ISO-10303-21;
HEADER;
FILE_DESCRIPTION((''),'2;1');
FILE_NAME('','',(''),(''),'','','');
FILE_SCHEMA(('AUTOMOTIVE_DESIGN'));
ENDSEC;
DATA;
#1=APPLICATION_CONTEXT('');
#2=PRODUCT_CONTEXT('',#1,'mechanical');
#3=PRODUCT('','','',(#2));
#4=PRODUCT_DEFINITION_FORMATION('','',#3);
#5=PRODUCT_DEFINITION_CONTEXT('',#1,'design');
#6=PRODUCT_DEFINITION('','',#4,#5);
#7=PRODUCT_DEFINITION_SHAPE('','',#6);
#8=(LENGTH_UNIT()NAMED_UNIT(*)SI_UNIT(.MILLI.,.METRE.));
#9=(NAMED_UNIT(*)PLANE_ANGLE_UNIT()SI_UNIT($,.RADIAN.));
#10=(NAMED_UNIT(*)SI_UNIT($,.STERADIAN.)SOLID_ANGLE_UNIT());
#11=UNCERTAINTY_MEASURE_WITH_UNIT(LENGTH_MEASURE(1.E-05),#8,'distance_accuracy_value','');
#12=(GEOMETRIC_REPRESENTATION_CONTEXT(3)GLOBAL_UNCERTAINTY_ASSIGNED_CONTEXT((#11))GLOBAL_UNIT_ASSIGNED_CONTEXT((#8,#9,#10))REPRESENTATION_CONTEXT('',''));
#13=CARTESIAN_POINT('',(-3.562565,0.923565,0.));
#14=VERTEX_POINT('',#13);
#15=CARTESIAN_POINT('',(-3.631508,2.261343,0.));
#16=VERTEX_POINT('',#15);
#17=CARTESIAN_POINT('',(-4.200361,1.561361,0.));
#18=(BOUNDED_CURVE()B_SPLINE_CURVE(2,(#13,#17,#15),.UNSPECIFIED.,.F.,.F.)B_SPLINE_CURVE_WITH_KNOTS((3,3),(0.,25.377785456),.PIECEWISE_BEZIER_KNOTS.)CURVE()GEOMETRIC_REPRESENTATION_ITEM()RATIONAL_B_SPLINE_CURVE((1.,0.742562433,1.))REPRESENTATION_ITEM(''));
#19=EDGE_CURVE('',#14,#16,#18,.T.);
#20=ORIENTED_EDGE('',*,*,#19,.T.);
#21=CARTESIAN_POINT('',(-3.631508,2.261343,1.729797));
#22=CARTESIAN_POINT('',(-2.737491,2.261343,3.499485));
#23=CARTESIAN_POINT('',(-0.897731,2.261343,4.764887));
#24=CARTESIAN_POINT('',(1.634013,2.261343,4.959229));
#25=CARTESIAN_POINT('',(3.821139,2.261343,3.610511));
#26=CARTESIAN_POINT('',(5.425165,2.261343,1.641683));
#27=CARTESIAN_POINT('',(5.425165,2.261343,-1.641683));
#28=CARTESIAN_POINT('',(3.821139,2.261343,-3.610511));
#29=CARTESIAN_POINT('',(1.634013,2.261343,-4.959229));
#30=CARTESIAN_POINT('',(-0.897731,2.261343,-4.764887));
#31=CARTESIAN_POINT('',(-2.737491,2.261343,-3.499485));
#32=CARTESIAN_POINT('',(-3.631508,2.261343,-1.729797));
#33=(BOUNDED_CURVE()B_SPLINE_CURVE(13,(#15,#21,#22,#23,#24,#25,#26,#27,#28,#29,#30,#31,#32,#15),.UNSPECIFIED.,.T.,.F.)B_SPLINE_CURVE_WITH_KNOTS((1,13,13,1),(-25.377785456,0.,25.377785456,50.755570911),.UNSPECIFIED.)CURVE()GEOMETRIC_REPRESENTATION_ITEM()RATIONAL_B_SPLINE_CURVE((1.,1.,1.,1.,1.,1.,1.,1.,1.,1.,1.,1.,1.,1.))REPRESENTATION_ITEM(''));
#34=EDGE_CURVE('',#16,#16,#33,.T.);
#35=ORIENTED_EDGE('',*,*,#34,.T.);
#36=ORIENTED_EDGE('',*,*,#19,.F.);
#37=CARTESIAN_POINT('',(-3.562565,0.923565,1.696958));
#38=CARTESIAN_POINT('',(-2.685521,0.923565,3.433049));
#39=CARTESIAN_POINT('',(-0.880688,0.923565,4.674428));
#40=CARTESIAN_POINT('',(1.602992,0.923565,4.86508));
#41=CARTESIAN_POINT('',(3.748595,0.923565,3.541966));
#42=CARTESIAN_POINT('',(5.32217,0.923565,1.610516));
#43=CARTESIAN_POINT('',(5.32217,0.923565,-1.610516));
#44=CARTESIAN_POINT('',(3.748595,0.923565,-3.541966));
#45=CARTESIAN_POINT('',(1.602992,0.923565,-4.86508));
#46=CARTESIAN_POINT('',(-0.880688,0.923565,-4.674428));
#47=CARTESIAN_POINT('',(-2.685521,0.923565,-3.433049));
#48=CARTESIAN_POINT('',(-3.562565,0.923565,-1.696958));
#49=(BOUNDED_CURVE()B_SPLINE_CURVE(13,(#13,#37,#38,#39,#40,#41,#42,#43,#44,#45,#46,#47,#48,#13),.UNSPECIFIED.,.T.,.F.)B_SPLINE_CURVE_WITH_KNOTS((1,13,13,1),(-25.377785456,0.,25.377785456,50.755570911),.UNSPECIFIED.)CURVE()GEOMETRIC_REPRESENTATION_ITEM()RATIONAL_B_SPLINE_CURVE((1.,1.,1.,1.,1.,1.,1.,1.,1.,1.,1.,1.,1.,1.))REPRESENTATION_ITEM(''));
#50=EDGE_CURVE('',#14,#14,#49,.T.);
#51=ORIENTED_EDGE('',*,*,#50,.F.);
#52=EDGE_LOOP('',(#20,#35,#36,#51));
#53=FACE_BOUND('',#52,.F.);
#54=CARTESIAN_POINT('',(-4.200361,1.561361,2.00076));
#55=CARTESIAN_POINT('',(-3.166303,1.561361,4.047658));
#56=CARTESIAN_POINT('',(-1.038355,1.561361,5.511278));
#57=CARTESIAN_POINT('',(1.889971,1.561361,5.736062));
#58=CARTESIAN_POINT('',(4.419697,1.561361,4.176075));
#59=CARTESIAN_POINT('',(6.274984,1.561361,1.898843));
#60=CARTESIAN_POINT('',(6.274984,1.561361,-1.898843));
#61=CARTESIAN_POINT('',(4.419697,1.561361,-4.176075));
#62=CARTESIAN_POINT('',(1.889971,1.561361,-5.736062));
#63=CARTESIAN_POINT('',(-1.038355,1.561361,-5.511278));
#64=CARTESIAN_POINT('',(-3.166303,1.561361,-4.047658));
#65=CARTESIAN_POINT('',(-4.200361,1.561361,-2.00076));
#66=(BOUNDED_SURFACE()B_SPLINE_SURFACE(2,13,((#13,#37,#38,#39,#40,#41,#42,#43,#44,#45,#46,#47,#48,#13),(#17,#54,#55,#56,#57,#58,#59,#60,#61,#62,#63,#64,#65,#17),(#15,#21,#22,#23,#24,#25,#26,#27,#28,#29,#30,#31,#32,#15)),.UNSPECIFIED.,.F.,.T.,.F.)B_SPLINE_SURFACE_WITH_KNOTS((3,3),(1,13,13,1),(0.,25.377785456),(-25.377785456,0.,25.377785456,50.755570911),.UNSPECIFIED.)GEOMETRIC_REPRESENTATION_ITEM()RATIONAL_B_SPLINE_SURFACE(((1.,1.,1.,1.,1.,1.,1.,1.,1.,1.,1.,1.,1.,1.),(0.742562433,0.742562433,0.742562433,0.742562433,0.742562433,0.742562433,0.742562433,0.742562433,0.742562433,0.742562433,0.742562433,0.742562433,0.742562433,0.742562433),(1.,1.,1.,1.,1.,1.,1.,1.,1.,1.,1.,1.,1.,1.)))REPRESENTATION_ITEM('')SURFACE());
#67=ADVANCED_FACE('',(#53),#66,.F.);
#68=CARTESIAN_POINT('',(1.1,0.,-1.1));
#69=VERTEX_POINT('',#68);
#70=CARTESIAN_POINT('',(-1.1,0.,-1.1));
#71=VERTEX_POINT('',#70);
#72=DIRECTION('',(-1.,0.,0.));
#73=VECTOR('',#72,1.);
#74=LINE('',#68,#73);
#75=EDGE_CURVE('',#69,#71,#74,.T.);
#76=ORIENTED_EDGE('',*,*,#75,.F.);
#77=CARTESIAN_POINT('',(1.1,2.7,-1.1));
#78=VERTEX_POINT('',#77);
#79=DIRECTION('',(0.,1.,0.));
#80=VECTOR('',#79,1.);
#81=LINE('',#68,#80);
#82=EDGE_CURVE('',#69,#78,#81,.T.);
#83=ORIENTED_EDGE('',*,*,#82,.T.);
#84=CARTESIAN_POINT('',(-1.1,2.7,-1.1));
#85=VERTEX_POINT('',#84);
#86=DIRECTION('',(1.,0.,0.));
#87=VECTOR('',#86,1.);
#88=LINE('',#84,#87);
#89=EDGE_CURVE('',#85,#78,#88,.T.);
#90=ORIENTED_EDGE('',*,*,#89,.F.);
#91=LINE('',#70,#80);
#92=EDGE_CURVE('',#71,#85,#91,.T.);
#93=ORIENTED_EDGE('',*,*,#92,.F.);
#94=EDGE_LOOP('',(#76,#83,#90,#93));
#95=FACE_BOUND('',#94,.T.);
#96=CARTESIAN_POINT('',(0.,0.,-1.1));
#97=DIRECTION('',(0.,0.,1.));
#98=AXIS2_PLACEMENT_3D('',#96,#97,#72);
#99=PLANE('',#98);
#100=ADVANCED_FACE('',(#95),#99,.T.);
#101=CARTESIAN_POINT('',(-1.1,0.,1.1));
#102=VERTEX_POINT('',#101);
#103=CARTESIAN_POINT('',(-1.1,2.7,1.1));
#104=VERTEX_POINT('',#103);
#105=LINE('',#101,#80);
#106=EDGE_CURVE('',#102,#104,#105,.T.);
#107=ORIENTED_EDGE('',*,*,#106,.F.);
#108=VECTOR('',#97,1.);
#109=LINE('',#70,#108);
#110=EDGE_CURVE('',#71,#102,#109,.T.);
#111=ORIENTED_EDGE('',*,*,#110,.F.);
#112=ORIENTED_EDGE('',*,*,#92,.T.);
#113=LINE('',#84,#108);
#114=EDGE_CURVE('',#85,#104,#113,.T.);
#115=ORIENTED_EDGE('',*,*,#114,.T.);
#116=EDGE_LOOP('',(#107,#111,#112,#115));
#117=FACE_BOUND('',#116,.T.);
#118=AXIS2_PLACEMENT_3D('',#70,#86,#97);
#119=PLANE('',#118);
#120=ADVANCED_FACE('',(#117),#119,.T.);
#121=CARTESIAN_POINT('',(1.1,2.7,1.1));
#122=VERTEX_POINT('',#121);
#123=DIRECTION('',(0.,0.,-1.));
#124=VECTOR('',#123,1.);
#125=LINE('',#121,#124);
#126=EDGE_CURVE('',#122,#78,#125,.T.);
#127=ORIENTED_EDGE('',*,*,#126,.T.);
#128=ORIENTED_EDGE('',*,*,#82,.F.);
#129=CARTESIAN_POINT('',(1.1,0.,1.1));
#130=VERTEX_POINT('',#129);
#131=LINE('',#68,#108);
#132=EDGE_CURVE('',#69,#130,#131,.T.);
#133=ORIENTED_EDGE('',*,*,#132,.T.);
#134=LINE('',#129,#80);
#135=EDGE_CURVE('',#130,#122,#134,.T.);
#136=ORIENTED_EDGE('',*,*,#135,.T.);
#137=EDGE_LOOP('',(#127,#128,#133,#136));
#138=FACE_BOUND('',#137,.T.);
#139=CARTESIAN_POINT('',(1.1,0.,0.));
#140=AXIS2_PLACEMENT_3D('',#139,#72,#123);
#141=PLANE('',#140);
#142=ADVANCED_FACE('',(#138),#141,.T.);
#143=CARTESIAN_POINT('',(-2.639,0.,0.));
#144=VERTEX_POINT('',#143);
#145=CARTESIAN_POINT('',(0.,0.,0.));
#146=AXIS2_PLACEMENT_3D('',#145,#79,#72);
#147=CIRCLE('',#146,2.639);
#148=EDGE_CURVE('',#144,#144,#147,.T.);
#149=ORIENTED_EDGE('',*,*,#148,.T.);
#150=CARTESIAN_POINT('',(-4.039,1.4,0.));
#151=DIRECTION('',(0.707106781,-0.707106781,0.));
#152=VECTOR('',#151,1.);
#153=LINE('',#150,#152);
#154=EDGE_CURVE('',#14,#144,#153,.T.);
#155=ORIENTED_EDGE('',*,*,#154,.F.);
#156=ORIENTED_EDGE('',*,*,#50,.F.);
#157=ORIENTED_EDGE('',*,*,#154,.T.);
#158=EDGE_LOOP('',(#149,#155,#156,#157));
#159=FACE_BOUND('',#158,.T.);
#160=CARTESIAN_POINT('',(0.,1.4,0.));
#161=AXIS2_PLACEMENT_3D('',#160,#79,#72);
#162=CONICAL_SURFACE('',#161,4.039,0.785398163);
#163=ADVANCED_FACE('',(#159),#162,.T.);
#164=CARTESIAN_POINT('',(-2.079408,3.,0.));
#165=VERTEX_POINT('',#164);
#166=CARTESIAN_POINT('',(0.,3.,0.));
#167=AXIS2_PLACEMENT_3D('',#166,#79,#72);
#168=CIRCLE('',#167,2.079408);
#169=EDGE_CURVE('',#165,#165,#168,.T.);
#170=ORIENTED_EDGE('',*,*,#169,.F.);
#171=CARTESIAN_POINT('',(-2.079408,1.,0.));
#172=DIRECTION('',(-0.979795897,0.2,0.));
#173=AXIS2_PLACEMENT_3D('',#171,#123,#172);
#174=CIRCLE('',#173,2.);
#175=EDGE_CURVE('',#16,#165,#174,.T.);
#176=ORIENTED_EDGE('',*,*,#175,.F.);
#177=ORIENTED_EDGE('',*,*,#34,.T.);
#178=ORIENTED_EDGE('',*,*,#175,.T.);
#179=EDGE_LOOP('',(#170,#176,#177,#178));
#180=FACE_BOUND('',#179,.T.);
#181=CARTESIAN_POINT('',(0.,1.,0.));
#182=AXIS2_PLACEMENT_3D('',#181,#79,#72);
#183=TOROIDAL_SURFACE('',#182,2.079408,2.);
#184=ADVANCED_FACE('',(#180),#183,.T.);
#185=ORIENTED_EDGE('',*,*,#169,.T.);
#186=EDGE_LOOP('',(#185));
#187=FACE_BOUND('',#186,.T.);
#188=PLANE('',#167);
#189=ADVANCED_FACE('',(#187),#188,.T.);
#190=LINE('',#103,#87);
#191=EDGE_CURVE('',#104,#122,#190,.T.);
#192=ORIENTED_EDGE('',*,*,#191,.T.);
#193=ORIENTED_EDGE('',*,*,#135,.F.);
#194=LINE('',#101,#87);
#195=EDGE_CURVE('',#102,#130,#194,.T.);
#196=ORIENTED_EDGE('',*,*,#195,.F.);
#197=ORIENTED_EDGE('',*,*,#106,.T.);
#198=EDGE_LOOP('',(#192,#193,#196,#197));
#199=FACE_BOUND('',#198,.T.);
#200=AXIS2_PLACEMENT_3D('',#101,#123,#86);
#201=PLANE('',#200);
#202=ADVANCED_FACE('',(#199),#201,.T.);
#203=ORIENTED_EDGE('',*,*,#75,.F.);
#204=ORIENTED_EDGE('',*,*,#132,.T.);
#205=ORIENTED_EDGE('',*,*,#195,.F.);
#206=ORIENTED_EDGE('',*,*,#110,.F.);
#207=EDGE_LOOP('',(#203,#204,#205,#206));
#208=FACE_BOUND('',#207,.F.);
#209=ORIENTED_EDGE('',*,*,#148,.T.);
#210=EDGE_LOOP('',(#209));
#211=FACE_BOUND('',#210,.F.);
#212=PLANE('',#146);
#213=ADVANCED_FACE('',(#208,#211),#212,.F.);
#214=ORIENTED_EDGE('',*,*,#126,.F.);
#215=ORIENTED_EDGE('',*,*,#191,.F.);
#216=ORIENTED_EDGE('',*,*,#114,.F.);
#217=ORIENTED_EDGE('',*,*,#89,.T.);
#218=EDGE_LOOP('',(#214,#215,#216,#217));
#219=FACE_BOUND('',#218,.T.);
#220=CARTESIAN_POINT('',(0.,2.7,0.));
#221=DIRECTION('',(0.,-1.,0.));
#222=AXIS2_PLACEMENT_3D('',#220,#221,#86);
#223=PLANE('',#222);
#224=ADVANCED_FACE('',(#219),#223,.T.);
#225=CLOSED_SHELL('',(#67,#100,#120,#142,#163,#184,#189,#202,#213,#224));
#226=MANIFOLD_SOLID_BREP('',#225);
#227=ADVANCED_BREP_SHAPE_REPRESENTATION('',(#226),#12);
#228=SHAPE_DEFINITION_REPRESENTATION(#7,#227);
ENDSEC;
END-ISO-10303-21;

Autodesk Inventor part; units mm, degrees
ref_plane "YZ Plane" through (0, 0, 0) normal (1, 0, 0) x (0, 1, 0)
ref_plane "XZ Plane" through (0, 0, 0) normal (0, 1, 0) x (-1, 0, 0)
ref_plane "XY Plane" through (0, 0, 0) normal (0, 0, 1) x (1, 0, 0)
sketch "Skizze1" plane through (0, 0, 0) normal (0, 1, 0) x (-1, 0, 0)
  circle A0 centre (0, 0) radius 4.039
  line L0 (0, 0) -> (1, 0)
  line L1 (1, 0) -> (1, 1)
  line L2 (1, 1) -> (0, 1)
  line L3 (0, 1) -> (0, 0)
  line L4 (1, 1) -> (-1, 1)
  line L5 (-1, 1) -> (-1, -1)
  line L6 (-1, -1) -> (1, -1)
  line L7 (1, -1) -> (1, 1)
  dimension "d10" = 1
  dimension "d11" = 1
  dimension "d12" = 2
  dimension "d13" = 2
extrude "Extrusion1" add sketch "Skizze1" along normal blind 3 contours A0 | L3 L2 L1 L0 | L0 L7 L6 L5 L4 L3
sketch "Skizze2" plane through (0, 3, 0) normal (0, 1, 0) x (1, 0, 0)
  circle A0 centre (0, 0) radius 2
extrude "Extrusion2" add sketch "Skizze2" against normal blind 1
chamfer "Fase1" distance 1.4 angle 45 1 edges at (4.039, 0, 0)
sketch "Skizze3" plane through (0, 0, 0) normal (0, -1, 0) x (1, 0, 0)
  line L0 (0, 0) -> (1.1, 0)
  line L1 (1.1, 0) -> (1.1, -1.1)
  line L2 (1.1, -1.1) -> (0, -1.1)
  line L3 (0, -1.1) -> (0, 0)
  line L4 (1.1, -1.1) -> (-1.1, -1.1)
  line L5 (-1.1, -1.1) -> (-1.1, 1.1)
  line L6 (-1.1, 1.1) -> (1.1, 1.1)
  line L7 (1.1, 1.1) -> (1.1, -1.1)
  dimension "d14" = 1.1
  dimension "d15" = 1.1
  dimension "d16" = 2.2
  dimension "d17" = 2.2
extrude "Extrusion3" cut sketch "Skizze3" against normal blind 2.7
fillet "Rundung4" radius 2 1 edges at (4.039, 3, 0)
fillet "Rundung5" radius 1 1 edges at (4.039, 1.4, 0)
properties part number "joystick" material "Gummi, Silikon"
